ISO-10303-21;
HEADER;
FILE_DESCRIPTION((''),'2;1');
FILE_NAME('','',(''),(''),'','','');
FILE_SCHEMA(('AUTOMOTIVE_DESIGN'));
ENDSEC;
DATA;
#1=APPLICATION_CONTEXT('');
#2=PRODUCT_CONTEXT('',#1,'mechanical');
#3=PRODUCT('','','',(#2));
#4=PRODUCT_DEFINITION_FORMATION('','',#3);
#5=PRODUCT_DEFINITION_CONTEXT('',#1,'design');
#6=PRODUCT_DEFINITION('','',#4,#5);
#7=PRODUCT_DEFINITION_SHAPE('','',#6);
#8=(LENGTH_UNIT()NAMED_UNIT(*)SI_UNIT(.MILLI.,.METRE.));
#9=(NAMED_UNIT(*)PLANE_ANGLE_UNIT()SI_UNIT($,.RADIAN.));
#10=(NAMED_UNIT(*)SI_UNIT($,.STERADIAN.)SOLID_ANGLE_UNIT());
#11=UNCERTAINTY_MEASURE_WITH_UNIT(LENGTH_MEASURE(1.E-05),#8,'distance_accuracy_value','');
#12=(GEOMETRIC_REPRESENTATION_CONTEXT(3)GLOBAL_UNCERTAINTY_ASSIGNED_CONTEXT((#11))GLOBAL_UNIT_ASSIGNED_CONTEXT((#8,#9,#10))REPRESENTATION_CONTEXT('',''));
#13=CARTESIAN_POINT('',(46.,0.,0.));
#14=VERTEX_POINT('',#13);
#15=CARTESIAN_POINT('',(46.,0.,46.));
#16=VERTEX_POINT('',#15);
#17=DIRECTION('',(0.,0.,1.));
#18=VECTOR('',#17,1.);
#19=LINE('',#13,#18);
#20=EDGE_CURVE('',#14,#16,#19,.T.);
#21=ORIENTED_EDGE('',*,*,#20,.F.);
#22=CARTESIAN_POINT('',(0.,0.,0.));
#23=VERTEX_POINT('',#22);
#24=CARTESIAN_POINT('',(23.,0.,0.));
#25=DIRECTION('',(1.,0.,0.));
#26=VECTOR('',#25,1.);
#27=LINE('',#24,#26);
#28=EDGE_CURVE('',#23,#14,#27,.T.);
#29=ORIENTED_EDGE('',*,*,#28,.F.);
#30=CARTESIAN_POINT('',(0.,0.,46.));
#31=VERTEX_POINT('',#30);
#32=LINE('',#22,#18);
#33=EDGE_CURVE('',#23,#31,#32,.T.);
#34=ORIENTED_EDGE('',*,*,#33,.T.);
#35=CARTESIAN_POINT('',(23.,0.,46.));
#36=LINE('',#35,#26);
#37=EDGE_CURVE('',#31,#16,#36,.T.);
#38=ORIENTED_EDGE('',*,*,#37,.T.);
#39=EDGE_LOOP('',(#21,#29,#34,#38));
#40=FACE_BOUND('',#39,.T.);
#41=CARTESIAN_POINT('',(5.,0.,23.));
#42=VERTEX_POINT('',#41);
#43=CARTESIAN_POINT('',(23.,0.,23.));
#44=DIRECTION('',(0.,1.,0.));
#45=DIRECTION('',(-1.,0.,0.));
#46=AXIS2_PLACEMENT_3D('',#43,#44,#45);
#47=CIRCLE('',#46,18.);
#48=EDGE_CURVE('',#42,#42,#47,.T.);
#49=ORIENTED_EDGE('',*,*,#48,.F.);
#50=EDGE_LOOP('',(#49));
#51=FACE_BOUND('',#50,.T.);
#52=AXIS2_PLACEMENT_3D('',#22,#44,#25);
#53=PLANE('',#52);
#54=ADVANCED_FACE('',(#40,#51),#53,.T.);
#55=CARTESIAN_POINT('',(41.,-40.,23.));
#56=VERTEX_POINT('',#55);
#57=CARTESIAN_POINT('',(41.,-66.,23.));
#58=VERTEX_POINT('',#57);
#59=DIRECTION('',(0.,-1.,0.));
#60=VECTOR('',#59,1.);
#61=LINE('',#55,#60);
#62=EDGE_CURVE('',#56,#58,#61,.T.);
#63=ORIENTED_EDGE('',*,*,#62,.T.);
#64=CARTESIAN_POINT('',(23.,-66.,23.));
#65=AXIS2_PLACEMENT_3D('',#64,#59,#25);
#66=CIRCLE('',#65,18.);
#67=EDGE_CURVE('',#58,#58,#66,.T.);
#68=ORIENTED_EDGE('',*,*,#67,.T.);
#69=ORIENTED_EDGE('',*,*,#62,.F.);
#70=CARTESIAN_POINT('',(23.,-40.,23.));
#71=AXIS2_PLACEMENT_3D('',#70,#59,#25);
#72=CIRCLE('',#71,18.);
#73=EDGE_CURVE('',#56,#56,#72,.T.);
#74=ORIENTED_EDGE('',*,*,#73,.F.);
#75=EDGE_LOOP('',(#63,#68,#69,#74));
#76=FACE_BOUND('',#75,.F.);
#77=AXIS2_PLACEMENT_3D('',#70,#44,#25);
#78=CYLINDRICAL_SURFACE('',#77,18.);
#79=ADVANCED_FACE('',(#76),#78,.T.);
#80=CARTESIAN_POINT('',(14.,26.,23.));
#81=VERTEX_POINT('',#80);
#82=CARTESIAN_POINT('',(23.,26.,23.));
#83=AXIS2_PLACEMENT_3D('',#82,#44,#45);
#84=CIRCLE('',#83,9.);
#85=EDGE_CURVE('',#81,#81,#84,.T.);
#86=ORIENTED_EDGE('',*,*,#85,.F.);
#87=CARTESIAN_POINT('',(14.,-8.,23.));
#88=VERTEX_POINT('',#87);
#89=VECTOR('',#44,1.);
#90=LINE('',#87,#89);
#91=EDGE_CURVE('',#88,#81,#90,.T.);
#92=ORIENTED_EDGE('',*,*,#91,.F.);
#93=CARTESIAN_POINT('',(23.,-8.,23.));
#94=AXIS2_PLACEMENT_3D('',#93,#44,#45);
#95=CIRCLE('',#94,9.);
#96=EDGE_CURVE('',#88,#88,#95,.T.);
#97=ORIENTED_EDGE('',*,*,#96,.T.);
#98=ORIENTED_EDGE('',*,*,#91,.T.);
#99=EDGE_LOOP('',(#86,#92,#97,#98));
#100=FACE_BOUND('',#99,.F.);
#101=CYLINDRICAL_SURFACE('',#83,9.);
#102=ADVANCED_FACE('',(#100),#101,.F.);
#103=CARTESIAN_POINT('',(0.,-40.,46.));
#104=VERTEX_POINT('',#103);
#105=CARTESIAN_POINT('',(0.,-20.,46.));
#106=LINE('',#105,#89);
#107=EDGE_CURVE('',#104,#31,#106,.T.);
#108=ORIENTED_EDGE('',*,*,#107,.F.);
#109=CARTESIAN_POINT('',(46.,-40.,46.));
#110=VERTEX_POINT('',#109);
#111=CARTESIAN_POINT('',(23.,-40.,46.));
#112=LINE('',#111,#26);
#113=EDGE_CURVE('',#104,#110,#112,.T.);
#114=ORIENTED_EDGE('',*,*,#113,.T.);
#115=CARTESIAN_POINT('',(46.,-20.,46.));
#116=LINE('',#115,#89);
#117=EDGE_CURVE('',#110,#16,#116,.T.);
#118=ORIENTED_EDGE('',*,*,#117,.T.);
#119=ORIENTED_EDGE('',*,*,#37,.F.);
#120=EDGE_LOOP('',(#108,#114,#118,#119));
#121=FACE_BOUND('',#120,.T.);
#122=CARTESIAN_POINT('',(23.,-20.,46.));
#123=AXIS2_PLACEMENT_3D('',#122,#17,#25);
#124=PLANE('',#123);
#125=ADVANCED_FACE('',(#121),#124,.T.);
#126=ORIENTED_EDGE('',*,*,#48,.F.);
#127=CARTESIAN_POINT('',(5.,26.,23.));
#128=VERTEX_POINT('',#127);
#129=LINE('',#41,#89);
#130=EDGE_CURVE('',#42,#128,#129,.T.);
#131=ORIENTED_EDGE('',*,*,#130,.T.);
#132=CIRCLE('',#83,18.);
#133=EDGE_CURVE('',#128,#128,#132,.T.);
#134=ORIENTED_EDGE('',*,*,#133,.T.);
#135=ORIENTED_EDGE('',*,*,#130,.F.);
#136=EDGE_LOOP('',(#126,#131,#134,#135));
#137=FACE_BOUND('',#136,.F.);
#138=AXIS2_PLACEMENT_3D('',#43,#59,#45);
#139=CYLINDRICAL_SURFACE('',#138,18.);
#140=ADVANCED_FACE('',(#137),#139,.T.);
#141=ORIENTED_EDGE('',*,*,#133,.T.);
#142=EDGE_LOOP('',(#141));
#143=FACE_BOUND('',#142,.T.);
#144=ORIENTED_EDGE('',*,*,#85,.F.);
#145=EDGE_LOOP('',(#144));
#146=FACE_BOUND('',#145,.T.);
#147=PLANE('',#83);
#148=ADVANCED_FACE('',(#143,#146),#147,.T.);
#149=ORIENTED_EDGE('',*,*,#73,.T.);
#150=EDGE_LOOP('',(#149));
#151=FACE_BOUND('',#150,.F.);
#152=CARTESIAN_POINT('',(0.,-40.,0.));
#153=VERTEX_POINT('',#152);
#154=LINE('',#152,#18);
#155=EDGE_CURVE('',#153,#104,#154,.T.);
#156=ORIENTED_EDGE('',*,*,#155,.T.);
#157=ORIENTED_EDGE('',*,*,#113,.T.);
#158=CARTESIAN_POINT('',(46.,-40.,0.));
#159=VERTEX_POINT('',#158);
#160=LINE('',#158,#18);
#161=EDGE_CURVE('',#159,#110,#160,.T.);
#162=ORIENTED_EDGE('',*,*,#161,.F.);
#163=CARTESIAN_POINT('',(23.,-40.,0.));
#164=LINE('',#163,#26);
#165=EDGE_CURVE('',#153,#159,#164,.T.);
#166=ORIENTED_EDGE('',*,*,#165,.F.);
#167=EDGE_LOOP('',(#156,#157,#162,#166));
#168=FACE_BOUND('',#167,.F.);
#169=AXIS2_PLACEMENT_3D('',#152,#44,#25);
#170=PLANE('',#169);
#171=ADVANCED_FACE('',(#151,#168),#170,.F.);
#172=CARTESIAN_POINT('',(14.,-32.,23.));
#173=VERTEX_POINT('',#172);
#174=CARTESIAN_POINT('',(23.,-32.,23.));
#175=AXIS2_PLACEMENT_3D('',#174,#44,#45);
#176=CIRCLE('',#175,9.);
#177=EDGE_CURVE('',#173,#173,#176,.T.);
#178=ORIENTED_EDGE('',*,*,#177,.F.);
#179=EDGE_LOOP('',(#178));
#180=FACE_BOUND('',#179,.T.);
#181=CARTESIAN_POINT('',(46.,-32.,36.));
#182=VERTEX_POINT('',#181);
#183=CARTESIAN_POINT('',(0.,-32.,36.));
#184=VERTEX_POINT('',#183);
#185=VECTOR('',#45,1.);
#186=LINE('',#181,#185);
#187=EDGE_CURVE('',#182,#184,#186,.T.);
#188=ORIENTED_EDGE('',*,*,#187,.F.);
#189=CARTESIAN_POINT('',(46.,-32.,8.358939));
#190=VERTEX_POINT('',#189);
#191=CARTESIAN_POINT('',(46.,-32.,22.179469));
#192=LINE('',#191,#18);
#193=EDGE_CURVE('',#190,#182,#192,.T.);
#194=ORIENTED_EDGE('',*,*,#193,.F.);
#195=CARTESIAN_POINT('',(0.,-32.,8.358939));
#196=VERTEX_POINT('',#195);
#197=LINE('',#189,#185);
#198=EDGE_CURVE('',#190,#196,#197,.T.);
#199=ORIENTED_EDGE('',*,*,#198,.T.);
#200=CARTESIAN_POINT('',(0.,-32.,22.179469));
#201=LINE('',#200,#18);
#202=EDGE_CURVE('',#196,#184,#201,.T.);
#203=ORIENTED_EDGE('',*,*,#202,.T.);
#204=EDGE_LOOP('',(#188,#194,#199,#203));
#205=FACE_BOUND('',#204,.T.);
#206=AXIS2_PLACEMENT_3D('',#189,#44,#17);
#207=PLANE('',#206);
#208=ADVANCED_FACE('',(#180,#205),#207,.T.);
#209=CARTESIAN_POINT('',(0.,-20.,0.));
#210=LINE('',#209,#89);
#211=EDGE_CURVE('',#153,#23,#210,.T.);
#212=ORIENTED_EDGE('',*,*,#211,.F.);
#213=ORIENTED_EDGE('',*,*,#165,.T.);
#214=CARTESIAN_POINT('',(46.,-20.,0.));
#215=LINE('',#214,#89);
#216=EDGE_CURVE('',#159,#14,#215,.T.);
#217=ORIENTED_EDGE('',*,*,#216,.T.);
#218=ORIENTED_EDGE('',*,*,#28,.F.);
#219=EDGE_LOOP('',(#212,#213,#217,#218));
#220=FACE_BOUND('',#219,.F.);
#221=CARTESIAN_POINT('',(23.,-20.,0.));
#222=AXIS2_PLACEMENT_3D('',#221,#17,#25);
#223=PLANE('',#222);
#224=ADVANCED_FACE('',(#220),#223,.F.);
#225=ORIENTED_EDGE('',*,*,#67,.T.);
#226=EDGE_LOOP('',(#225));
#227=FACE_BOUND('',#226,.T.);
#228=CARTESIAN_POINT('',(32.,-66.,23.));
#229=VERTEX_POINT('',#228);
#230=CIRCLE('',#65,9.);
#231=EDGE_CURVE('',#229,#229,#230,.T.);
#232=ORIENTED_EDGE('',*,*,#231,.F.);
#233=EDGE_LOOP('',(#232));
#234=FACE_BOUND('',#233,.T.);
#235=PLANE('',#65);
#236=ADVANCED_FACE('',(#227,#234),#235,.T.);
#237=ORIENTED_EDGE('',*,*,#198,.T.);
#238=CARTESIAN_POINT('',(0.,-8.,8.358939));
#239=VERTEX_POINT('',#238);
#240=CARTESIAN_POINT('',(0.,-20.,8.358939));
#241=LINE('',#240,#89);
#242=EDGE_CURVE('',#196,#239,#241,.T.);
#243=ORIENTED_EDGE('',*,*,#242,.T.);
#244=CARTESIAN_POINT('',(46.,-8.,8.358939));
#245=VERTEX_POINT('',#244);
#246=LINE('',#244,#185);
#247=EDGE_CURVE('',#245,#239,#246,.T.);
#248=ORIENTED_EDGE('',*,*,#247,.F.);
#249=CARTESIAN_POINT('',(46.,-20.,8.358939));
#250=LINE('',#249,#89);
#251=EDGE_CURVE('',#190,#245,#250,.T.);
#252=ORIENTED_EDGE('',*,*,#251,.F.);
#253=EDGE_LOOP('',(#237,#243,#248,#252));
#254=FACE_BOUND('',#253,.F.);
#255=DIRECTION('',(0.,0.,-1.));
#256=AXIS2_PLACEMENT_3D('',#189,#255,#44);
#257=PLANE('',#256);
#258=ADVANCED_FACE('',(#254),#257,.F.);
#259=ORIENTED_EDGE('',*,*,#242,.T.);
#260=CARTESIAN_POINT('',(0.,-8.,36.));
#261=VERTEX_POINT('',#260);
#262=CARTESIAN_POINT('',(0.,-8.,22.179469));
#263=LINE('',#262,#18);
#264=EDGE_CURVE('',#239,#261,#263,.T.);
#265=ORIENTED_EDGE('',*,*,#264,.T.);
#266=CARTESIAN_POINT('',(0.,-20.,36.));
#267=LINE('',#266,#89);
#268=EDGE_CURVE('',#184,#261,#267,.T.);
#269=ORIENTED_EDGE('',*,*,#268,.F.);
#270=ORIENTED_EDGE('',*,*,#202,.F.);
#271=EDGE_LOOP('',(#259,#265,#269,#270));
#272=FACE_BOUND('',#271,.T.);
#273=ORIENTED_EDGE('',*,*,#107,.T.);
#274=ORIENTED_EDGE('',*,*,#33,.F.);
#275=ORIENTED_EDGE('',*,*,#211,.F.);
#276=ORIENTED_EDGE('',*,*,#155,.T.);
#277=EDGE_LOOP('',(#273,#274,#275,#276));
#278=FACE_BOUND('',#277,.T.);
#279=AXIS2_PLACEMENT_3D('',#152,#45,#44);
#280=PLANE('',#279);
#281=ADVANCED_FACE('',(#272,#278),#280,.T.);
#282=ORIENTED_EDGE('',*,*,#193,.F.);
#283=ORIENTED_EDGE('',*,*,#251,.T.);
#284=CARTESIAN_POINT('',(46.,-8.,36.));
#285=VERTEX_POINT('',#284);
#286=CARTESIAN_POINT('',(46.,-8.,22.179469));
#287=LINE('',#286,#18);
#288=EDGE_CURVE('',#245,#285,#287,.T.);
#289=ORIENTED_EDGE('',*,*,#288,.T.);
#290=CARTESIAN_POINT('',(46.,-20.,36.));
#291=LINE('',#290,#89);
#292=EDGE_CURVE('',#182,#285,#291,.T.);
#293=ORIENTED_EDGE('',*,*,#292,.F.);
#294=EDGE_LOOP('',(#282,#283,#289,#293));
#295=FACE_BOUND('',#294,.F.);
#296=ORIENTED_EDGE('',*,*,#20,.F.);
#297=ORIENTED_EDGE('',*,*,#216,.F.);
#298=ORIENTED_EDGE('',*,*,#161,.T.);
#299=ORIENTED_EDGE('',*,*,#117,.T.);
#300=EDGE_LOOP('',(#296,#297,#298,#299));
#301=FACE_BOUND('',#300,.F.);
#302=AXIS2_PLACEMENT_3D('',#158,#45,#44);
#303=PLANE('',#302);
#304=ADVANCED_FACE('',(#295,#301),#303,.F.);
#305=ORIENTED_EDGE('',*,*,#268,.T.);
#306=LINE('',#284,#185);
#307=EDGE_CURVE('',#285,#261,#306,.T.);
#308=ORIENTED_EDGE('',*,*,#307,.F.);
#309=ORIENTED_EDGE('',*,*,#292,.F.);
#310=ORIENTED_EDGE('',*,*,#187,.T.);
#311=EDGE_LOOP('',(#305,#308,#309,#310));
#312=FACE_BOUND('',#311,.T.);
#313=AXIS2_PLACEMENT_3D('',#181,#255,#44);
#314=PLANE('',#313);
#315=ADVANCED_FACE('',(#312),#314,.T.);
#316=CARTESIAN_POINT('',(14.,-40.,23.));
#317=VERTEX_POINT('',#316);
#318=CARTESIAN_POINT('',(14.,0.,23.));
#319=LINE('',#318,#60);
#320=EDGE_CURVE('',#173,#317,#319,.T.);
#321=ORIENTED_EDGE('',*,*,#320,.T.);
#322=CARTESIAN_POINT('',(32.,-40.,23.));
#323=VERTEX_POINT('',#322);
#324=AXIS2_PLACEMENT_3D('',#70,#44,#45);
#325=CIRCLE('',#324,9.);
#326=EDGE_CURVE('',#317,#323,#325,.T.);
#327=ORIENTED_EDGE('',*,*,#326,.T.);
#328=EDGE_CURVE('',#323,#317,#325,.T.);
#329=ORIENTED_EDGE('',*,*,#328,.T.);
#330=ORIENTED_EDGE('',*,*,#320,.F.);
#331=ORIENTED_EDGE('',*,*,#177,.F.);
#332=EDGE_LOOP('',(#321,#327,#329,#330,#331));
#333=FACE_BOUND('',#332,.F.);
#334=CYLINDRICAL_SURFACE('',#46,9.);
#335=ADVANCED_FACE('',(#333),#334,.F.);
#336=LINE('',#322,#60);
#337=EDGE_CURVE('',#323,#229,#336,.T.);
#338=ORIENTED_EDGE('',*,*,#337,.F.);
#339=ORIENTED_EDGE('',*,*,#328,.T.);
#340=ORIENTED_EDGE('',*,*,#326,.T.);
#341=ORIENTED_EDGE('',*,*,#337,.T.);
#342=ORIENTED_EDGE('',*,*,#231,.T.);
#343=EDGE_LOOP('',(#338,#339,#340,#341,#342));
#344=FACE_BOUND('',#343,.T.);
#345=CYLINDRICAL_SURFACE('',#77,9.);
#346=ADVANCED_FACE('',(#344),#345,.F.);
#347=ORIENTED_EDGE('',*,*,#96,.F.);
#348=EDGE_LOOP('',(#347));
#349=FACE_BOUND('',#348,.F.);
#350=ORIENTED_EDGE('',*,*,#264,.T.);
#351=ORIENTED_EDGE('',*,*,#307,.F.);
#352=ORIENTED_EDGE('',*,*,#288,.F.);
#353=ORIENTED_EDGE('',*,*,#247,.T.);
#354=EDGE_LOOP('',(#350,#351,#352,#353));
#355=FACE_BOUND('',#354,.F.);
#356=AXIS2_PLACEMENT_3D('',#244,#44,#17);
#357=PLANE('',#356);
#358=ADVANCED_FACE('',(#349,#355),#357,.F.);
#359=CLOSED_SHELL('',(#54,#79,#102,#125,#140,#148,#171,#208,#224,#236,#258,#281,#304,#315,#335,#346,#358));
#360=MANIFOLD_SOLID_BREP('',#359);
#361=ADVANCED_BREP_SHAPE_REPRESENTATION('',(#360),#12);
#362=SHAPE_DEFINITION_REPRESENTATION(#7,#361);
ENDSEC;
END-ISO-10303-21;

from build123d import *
from build123d import SkipClean  # not in build123d's __all__

# Parameters (mm, degrees)
F0_W      = 46
F0_H      = 40
F1_DEPTH  = 46
F2_W      = 24
F2_H      = 27.6410613805
F3_DEPTH  = 46
F4_R      = 9
F6_DEPTH  = 46
F5_R      = 18
F7_DEPTH  = 26
F8_R      = 9
F9_DEPTH  = 26
F10_R     = 18
F10_R_2   = 9
F11_DEPTH = 26


with BuildPart() as f1:
    # F0 (on Top) → F1 (new body)
    with BuildSketch(Plane.XY):
        with Locations((23, -20)):
            Rectangle(F0_W, F0_H)
    extrude(amount=F1_DEPTH)

    # F2 (on face) → F3 (cut)
    with BuildSketch(Plane.YZ.offset(46)):
        with Locations((-20, 22.1794693097)):
            Rectangle(F2_W, F2_H)
    extrude(amount=-F3_DEPTH, mode=Mode.SUBTRACT)

    # F4 (on face) → F6 (cut)
    with BuildSketch(Plane(origin=(0, 0, 0), x_dir=(-1, 0, 0), z_dir=(0, 1, 0))):
        with Locations((-23, 23)):
            Circle(F4_R)
    extrude(amount=-F6_DEPTH, mode=Mode.SUBTRACT)

    # F5 (on face) → F7 (join)
    with BuildSketch(Plane(origin=(0, 0, 0), x_dir=(-1, 0, 0), z_dir=(0, 1, 0))):
        with Locations((-23, 23)):
            Circle(F5_R)
    extrude(amount=F7_DEPTH)

    # F8 (on face) → F9 (cut)
    with BuildSketch(Plane(origin=(0, 26, 0), x_dir=(-1, 0, 0), z_dir=(0, 1, 0))):
        with Locations((-23, 23)):
            Circle(F8_R)
    extrude(amount=-F9_DEPTH, mode=Mode.SUBTRACT)

    # F10 (on face) → F11 (join)
    with BuildSketch(Plane.XZ.offset(40)):
        with Locations((23, 23)):
            Circle(F10_R)
        with Locations((23, 23)):
            Circle(F10_R_2, mode=Mode.SUBTRACT)
    with SkipClean():  # cleaning this boolean's faces spoils the solid; the shape is the same uncleaned
        extrude(amount=F11_DEPTH)


solid = f1.part
